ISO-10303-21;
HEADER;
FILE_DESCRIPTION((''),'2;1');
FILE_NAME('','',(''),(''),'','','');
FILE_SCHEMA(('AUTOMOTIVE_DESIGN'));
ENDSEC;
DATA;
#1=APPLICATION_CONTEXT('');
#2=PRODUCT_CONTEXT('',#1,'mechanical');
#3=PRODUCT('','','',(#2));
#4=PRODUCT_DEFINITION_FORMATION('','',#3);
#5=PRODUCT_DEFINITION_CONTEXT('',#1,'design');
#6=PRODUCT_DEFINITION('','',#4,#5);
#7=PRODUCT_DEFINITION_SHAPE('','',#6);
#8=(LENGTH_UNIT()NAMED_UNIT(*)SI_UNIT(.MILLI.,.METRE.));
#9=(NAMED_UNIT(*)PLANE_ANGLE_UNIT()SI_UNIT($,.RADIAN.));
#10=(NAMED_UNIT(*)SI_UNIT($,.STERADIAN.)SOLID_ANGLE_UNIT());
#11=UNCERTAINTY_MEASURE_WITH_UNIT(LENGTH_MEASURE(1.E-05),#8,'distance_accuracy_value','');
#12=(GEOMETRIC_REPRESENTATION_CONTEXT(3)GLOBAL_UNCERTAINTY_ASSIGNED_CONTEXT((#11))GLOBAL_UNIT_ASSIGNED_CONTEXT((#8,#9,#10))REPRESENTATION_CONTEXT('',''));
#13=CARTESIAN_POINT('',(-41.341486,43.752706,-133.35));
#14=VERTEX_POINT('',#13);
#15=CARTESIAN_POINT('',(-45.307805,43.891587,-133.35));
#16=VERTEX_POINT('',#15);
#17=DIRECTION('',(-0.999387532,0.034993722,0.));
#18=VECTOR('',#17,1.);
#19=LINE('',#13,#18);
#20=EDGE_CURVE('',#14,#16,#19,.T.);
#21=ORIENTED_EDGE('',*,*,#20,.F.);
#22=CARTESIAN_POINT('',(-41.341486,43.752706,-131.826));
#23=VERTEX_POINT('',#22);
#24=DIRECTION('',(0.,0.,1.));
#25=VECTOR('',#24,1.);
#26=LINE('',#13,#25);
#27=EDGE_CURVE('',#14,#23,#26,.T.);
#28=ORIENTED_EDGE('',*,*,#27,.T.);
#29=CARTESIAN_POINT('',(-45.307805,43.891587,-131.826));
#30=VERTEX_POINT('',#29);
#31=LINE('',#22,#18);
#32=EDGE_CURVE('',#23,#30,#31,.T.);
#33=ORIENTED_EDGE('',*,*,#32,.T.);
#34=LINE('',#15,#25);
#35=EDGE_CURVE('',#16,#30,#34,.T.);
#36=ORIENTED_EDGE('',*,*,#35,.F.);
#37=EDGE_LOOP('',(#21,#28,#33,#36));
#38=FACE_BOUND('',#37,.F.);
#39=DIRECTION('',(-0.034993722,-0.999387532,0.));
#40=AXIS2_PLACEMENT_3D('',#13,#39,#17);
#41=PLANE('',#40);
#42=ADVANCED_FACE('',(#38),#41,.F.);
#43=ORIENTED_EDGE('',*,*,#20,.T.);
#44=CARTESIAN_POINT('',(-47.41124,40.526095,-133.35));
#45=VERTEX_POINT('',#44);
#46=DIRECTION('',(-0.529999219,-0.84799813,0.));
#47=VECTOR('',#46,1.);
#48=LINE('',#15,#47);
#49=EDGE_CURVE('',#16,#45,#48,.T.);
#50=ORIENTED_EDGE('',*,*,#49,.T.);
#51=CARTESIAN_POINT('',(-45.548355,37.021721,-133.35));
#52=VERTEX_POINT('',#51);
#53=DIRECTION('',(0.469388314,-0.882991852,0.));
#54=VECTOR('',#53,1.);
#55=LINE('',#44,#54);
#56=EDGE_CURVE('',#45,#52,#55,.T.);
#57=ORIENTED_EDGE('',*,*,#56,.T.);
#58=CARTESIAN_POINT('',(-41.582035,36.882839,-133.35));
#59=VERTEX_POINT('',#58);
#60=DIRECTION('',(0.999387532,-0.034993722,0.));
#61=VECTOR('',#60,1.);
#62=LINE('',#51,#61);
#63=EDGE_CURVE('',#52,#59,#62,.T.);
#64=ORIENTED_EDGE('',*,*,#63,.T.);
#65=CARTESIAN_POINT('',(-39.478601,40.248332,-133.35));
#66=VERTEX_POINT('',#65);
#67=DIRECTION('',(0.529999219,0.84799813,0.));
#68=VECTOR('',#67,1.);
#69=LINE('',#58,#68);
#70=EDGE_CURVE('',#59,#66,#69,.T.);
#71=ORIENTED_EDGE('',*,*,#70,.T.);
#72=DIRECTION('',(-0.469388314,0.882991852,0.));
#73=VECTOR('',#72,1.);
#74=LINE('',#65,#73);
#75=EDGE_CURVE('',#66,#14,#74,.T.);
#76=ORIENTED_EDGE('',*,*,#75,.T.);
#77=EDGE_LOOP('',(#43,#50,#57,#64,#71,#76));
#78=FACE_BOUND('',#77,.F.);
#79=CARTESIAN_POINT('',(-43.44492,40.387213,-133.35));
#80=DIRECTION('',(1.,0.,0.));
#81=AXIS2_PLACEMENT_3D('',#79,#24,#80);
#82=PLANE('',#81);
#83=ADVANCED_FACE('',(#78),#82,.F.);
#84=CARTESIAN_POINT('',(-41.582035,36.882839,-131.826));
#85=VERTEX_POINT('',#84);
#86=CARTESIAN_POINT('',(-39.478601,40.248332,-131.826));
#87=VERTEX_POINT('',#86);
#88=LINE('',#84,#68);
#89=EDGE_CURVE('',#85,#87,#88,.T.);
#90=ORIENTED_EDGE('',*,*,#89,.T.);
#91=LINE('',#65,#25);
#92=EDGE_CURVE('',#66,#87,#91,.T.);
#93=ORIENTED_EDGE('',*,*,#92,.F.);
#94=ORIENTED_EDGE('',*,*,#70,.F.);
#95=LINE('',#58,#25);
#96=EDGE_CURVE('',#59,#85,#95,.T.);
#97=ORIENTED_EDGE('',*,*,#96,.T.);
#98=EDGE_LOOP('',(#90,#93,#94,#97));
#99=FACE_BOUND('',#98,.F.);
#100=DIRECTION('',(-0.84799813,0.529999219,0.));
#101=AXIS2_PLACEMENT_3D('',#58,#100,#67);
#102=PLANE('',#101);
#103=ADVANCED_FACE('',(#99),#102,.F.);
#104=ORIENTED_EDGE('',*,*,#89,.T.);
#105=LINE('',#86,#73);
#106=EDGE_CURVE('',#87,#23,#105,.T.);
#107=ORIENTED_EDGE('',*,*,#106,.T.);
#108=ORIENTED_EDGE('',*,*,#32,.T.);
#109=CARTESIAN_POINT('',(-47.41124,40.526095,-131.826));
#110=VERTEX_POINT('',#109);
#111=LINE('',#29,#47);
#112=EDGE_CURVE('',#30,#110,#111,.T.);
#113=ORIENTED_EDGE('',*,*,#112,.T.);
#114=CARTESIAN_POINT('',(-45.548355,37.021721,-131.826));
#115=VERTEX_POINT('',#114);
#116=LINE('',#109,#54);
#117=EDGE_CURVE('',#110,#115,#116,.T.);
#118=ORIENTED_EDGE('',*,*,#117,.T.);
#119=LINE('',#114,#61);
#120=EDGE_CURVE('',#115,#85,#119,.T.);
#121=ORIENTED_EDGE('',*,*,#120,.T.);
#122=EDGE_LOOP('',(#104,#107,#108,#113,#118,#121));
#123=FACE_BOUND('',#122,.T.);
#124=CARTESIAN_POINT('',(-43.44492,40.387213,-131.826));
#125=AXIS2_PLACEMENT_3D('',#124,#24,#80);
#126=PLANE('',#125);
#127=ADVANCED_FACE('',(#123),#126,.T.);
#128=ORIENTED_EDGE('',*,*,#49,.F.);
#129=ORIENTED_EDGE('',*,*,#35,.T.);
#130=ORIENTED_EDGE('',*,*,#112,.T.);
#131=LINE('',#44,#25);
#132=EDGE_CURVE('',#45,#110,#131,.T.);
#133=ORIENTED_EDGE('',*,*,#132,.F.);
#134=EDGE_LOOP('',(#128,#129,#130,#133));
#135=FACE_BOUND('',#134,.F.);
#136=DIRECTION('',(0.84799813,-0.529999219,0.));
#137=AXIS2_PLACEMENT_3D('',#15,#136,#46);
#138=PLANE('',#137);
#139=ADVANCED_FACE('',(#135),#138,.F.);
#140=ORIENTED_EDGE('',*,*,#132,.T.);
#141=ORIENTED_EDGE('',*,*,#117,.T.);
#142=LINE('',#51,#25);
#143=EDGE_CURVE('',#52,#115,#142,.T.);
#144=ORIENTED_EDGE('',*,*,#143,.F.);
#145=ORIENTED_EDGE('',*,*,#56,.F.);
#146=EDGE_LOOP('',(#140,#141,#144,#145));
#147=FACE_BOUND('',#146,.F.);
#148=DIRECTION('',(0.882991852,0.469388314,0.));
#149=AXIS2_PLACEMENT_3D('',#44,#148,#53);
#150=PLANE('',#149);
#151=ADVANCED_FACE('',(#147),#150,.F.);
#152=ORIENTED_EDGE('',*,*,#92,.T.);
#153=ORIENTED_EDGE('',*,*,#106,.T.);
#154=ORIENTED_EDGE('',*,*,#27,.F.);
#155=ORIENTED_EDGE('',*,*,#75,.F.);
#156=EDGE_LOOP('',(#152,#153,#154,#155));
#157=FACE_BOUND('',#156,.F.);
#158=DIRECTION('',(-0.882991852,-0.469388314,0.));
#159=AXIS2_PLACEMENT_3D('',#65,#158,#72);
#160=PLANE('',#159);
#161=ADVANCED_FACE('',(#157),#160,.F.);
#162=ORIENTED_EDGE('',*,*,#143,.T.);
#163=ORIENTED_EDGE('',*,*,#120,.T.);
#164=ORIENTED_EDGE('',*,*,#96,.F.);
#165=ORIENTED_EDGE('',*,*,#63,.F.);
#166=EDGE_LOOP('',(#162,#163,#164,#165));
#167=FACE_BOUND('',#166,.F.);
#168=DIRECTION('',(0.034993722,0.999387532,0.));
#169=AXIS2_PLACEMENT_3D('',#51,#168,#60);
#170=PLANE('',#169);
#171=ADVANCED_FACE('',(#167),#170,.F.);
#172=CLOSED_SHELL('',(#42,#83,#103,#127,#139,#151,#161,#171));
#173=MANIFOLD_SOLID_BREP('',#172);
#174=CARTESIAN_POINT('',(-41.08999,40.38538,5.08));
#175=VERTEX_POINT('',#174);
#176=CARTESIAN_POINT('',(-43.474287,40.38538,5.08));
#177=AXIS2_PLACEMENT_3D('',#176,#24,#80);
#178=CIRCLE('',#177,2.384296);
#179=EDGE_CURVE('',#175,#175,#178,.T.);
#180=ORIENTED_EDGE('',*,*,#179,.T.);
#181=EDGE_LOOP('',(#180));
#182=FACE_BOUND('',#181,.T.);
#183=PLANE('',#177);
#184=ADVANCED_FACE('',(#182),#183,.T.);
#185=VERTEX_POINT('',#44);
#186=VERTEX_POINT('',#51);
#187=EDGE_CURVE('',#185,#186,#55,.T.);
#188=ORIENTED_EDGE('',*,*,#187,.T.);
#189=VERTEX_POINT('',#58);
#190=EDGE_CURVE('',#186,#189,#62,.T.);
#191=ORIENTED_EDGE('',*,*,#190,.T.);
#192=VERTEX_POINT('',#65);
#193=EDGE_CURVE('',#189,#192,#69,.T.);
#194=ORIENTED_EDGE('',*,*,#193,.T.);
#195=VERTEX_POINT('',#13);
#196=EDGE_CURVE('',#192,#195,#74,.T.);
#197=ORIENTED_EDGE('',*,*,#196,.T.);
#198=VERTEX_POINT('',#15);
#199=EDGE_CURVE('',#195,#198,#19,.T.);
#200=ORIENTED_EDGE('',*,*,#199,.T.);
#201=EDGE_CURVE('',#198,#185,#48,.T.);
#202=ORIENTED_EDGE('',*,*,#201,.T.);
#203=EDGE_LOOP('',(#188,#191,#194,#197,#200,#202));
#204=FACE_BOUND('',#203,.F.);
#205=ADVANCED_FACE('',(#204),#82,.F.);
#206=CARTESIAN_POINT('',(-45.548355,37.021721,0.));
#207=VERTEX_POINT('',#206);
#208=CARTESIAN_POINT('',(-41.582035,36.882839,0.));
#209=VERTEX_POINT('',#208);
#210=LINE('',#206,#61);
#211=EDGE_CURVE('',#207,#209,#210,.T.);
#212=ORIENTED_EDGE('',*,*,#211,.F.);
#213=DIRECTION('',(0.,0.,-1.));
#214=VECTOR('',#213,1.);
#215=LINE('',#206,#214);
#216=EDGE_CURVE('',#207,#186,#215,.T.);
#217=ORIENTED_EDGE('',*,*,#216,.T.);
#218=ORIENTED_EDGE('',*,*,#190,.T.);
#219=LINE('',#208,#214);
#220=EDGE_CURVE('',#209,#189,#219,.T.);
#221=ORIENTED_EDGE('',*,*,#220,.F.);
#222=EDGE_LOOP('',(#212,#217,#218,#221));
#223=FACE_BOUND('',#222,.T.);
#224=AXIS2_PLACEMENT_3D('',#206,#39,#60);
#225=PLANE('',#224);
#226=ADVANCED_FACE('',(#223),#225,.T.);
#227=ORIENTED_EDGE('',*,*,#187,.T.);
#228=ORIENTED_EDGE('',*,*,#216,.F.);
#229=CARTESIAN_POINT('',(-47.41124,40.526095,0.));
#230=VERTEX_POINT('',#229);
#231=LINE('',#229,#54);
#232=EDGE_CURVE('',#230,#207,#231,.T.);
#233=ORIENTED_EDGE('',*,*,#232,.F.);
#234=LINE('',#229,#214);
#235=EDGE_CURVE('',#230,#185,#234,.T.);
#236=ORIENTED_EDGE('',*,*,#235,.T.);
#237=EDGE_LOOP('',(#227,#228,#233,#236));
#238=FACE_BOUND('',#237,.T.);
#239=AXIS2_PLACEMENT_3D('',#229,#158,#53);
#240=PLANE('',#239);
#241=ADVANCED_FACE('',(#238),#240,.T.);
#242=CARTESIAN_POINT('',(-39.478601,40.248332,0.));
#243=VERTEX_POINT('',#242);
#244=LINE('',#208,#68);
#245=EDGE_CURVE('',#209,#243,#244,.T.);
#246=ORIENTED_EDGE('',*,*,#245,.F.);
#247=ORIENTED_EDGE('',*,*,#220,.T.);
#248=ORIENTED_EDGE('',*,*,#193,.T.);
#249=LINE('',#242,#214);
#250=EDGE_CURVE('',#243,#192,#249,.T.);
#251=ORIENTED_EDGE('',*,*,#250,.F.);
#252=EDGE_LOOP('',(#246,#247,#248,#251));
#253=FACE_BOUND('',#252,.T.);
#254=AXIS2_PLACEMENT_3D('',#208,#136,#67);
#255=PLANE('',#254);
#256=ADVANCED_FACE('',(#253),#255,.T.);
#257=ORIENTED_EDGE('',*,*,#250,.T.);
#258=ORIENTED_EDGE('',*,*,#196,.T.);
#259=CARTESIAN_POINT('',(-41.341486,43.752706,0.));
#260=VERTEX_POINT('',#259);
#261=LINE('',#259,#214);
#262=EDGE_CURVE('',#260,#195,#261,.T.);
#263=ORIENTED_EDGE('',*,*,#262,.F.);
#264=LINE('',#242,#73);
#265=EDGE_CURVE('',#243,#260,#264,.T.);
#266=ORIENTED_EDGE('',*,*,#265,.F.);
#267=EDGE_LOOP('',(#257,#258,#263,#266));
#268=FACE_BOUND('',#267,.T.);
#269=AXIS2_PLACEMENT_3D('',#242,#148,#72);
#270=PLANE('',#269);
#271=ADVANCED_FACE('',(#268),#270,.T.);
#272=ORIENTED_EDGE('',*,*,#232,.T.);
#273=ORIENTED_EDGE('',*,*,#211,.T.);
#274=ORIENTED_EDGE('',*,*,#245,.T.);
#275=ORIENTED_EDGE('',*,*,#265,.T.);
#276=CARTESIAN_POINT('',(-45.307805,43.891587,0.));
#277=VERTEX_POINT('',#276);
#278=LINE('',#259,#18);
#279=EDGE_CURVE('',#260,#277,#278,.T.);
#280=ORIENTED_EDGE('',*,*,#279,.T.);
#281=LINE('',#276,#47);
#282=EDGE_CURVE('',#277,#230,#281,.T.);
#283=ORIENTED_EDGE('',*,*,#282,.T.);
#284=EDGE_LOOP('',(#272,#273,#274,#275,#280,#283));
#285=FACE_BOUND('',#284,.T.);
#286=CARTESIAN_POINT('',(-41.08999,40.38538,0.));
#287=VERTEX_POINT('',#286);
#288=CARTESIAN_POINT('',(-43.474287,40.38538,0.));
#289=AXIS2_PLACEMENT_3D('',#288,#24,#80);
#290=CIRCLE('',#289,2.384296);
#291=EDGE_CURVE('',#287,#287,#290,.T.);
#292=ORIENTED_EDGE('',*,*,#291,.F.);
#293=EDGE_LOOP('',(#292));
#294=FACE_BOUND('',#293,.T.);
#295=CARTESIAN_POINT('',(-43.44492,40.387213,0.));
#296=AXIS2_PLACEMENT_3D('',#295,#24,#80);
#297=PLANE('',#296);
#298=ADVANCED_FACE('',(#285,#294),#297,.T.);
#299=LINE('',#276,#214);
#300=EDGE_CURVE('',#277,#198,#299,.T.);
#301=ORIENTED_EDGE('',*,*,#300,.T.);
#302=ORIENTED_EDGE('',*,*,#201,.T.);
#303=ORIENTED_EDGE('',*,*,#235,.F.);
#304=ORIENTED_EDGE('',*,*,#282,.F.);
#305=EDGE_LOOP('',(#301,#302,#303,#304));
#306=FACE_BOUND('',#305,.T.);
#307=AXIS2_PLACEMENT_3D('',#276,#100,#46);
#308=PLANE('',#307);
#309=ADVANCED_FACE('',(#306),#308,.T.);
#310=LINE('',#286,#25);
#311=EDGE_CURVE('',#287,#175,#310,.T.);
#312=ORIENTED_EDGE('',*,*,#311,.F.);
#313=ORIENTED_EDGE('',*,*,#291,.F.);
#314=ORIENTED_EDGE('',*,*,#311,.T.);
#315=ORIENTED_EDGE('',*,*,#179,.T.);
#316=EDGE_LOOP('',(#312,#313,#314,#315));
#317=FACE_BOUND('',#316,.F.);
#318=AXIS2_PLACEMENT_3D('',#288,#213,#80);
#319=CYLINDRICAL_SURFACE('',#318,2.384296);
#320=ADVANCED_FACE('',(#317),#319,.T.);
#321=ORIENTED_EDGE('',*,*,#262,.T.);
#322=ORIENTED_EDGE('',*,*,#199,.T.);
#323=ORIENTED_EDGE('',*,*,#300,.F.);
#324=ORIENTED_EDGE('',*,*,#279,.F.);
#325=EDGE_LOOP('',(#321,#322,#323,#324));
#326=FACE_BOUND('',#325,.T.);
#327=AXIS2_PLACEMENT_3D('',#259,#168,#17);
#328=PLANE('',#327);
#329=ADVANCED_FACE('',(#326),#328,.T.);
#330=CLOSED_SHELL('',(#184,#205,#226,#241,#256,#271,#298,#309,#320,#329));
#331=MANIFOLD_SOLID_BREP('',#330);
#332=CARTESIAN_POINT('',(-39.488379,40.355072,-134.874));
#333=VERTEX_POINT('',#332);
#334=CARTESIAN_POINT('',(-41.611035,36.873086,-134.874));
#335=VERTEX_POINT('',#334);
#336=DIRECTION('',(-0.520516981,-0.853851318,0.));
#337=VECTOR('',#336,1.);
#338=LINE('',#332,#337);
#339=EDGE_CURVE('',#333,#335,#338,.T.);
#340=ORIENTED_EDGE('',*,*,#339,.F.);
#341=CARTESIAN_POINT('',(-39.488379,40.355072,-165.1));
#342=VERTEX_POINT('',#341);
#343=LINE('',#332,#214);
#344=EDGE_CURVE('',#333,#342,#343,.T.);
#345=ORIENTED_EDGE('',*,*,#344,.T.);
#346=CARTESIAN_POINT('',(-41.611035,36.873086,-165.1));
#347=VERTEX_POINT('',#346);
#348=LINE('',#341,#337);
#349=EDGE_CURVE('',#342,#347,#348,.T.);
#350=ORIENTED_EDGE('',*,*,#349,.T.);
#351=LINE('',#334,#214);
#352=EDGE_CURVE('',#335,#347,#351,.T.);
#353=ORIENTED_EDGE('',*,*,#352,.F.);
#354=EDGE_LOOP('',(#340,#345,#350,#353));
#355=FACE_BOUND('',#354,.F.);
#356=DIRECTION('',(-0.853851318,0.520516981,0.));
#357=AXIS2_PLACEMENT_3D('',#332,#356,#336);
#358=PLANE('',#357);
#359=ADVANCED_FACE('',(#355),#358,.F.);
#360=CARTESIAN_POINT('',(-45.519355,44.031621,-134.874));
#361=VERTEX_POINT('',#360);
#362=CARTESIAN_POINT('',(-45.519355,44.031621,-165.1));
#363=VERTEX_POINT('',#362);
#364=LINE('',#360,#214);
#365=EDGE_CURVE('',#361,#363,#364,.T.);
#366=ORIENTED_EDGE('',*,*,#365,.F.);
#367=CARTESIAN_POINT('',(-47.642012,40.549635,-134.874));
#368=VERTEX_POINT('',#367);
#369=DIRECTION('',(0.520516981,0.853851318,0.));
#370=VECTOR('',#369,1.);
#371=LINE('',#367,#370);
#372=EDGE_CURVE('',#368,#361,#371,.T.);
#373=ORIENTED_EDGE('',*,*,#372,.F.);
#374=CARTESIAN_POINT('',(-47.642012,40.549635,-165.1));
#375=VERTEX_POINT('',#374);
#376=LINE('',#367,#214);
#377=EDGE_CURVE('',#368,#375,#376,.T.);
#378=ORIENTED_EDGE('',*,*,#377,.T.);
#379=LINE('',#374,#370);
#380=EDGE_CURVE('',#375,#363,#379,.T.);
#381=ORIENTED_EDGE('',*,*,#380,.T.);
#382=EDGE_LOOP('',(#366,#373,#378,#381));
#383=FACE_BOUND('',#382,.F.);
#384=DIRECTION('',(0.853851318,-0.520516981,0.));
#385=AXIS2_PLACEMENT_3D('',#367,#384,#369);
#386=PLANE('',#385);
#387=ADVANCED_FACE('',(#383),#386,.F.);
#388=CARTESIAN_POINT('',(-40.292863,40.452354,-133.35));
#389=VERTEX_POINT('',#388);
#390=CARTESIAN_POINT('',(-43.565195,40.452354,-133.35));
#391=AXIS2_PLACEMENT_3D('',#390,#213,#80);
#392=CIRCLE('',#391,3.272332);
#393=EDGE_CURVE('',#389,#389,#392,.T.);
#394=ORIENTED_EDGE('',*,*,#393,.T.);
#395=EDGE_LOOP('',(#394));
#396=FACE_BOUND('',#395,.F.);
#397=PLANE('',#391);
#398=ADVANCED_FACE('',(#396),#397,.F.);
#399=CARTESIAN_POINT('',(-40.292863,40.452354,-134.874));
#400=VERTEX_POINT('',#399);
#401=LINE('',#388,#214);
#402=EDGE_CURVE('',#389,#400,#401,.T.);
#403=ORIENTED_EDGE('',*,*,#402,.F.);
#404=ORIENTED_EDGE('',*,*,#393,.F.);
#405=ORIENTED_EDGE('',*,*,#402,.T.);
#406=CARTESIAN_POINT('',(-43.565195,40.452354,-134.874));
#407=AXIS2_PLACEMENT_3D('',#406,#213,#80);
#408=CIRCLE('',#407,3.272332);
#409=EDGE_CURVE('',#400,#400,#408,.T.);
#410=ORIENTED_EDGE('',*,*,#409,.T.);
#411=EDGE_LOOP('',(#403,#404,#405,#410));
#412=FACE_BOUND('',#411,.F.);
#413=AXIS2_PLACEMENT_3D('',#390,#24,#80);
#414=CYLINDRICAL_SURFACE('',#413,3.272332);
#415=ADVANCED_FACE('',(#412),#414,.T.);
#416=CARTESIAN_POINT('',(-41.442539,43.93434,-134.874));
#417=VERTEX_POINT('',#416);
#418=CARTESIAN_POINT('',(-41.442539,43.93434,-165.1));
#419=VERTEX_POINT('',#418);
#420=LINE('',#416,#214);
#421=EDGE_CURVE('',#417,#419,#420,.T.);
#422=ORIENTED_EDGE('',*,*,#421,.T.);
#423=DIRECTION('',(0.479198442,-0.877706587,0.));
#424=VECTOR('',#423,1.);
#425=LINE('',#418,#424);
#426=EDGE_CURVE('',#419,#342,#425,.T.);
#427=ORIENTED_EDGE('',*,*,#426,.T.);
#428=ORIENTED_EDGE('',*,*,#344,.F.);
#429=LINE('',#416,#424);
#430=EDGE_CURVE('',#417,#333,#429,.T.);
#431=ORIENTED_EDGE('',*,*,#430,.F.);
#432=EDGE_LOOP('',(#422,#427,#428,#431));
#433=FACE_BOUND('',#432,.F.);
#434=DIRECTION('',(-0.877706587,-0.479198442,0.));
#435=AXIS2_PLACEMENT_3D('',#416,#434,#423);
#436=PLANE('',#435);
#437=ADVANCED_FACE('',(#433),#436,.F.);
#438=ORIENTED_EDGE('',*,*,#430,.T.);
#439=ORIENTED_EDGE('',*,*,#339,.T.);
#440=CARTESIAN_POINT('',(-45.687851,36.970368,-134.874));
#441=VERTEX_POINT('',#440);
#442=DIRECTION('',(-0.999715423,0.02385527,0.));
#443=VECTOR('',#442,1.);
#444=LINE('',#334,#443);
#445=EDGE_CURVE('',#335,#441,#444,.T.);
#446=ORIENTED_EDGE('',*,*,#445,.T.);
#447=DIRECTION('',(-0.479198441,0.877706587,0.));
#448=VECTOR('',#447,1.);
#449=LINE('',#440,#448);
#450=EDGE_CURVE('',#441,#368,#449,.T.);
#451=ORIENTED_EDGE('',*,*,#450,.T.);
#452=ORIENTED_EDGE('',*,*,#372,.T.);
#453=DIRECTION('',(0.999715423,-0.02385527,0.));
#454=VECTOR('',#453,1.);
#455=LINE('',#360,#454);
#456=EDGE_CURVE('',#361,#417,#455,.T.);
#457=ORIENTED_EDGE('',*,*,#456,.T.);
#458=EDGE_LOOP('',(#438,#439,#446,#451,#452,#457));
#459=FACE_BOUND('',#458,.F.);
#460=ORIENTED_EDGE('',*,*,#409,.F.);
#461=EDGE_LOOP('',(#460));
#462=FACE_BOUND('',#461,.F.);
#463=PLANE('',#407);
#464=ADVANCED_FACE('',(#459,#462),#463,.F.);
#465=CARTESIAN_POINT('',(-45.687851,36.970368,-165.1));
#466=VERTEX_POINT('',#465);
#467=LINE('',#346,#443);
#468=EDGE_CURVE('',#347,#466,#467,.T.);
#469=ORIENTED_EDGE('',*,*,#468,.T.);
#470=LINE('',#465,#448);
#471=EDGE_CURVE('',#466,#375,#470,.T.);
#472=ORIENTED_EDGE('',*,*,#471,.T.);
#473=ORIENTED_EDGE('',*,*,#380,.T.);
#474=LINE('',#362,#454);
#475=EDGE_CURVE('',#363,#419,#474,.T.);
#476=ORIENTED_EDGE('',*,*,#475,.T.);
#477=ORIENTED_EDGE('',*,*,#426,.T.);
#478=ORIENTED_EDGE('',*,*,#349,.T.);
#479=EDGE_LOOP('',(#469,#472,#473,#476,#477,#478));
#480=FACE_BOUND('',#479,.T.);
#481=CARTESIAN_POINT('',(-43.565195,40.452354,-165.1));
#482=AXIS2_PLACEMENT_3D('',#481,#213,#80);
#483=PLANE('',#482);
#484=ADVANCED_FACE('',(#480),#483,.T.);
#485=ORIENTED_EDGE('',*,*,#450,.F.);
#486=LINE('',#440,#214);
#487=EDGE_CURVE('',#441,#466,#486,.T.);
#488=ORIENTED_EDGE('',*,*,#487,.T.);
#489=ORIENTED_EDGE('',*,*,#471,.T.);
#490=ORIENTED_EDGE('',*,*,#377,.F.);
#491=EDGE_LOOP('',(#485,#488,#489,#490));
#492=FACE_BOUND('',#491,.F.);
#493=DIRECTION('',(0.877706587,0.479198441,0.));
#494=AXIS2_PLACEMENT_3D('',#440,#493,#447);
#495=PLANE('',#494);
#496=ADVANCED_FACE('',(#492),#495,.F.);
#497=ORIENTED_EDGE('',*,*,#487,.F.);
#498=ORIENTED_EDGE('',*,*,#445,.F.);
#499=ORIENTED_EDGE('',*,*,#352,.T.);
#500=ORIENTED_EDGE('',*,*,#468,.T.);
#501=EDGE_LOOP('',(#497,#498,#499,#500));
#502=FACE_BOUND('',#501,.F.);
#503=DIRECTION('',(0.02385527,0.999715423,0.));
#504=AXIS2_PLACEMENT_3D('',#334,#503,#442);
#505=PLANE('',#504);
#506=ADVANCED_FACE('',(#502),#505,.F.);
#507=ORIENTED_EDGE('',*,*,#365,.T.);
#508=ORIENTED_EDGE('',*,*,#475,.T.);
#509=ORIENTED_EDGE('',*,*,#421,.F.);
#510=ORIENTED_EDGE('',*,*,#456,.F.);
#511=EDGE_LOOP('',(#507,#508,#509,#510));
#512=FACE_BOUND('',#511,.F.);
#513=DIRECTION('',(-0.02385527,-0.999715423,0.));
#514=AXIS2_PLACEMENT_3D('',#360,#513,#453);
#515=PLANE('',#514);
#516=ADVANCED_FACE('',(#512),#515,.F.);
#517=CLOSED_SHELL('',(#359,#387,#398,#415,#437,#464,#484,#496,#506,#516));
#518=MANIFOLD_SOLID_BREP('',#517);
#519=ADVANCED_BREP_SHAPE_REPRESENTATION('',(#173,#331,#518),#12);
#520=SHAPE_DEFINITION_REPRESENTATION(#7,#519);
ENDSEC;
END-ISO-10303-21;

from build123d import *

# Parameters (mm, degrees)
F1_DEPTH = 133.35
F2_R     = 2.384296381
F3_DEPTH = 5.08
F4_DEPTH = 1.524
F5_R     = 3.2723319481
F6_DEPTH = 1.524
F8_DEPTH = 30.226


with BuildPart() as f1:
    # F0 (on Top) → F1 (new body)
    with BuildSketch(Plane.XY):
        Polygon((-41.5820354619, 36.8828393166), (-39.4786010631, 40.2483318945), (-41.3414859324, 43.7527058081), (-45.3078052006, 43.8915871437), (-47.4112395994, 40.5260945657), (-45.5483547301, 37.0217206522), align=None)
    extrude(amount=-F1_DEPTH)

    # F2 (on face) → F3 (join)
    with BuildSketch(Plane.XY):
        with Locations((-43.4742867947, 40.3853803873)):
            Circle(F2_R)
    extrude(amount=F3_DEPTH)


with BuildPart() as f4:
    # F4 (new): a face of the model
    f4_faces = [f1.part.faces().sort_by_distance(p)[0] for p in [
        (-43.4449203312, 40.3872132301, -133.35),
    ]]
    extrude(f4_faces, amount=-F4_DEPTH)


with BuildPart() as f6:
    # F5 (on face) → F6 (new body)
    with BuildSketch(Plane(origin=(0, 0, -133.35), x_dir=(1, 0, 0), z_dir=(0, 0, -1))):
        with Locations((-43.565195096, -40.4523536563)):
            Circle(F5_R)
    extrude(amount=F6_DEPTH)

    # F7 (on face) → F8 (join)
    with BuildSketch(Plane(origin=(0, 0, -134.874), x_dir=(1, 0, 0), z_dir=(0, 0, -1))):
        Polygon((-39.4883785057, -40.355072412), (-41.6110348297, -36.8730863004), (-45.68785142, -36.9703675446), (-47.6420116863, -40.5496349006), (-45.5193553623, -44.0316210122), (-41.442538772, -43.9343397679), align=None)
    extrude(amount=F8_DEPTH)


solid = Compound([f1.part, f4.part, f6.part])
